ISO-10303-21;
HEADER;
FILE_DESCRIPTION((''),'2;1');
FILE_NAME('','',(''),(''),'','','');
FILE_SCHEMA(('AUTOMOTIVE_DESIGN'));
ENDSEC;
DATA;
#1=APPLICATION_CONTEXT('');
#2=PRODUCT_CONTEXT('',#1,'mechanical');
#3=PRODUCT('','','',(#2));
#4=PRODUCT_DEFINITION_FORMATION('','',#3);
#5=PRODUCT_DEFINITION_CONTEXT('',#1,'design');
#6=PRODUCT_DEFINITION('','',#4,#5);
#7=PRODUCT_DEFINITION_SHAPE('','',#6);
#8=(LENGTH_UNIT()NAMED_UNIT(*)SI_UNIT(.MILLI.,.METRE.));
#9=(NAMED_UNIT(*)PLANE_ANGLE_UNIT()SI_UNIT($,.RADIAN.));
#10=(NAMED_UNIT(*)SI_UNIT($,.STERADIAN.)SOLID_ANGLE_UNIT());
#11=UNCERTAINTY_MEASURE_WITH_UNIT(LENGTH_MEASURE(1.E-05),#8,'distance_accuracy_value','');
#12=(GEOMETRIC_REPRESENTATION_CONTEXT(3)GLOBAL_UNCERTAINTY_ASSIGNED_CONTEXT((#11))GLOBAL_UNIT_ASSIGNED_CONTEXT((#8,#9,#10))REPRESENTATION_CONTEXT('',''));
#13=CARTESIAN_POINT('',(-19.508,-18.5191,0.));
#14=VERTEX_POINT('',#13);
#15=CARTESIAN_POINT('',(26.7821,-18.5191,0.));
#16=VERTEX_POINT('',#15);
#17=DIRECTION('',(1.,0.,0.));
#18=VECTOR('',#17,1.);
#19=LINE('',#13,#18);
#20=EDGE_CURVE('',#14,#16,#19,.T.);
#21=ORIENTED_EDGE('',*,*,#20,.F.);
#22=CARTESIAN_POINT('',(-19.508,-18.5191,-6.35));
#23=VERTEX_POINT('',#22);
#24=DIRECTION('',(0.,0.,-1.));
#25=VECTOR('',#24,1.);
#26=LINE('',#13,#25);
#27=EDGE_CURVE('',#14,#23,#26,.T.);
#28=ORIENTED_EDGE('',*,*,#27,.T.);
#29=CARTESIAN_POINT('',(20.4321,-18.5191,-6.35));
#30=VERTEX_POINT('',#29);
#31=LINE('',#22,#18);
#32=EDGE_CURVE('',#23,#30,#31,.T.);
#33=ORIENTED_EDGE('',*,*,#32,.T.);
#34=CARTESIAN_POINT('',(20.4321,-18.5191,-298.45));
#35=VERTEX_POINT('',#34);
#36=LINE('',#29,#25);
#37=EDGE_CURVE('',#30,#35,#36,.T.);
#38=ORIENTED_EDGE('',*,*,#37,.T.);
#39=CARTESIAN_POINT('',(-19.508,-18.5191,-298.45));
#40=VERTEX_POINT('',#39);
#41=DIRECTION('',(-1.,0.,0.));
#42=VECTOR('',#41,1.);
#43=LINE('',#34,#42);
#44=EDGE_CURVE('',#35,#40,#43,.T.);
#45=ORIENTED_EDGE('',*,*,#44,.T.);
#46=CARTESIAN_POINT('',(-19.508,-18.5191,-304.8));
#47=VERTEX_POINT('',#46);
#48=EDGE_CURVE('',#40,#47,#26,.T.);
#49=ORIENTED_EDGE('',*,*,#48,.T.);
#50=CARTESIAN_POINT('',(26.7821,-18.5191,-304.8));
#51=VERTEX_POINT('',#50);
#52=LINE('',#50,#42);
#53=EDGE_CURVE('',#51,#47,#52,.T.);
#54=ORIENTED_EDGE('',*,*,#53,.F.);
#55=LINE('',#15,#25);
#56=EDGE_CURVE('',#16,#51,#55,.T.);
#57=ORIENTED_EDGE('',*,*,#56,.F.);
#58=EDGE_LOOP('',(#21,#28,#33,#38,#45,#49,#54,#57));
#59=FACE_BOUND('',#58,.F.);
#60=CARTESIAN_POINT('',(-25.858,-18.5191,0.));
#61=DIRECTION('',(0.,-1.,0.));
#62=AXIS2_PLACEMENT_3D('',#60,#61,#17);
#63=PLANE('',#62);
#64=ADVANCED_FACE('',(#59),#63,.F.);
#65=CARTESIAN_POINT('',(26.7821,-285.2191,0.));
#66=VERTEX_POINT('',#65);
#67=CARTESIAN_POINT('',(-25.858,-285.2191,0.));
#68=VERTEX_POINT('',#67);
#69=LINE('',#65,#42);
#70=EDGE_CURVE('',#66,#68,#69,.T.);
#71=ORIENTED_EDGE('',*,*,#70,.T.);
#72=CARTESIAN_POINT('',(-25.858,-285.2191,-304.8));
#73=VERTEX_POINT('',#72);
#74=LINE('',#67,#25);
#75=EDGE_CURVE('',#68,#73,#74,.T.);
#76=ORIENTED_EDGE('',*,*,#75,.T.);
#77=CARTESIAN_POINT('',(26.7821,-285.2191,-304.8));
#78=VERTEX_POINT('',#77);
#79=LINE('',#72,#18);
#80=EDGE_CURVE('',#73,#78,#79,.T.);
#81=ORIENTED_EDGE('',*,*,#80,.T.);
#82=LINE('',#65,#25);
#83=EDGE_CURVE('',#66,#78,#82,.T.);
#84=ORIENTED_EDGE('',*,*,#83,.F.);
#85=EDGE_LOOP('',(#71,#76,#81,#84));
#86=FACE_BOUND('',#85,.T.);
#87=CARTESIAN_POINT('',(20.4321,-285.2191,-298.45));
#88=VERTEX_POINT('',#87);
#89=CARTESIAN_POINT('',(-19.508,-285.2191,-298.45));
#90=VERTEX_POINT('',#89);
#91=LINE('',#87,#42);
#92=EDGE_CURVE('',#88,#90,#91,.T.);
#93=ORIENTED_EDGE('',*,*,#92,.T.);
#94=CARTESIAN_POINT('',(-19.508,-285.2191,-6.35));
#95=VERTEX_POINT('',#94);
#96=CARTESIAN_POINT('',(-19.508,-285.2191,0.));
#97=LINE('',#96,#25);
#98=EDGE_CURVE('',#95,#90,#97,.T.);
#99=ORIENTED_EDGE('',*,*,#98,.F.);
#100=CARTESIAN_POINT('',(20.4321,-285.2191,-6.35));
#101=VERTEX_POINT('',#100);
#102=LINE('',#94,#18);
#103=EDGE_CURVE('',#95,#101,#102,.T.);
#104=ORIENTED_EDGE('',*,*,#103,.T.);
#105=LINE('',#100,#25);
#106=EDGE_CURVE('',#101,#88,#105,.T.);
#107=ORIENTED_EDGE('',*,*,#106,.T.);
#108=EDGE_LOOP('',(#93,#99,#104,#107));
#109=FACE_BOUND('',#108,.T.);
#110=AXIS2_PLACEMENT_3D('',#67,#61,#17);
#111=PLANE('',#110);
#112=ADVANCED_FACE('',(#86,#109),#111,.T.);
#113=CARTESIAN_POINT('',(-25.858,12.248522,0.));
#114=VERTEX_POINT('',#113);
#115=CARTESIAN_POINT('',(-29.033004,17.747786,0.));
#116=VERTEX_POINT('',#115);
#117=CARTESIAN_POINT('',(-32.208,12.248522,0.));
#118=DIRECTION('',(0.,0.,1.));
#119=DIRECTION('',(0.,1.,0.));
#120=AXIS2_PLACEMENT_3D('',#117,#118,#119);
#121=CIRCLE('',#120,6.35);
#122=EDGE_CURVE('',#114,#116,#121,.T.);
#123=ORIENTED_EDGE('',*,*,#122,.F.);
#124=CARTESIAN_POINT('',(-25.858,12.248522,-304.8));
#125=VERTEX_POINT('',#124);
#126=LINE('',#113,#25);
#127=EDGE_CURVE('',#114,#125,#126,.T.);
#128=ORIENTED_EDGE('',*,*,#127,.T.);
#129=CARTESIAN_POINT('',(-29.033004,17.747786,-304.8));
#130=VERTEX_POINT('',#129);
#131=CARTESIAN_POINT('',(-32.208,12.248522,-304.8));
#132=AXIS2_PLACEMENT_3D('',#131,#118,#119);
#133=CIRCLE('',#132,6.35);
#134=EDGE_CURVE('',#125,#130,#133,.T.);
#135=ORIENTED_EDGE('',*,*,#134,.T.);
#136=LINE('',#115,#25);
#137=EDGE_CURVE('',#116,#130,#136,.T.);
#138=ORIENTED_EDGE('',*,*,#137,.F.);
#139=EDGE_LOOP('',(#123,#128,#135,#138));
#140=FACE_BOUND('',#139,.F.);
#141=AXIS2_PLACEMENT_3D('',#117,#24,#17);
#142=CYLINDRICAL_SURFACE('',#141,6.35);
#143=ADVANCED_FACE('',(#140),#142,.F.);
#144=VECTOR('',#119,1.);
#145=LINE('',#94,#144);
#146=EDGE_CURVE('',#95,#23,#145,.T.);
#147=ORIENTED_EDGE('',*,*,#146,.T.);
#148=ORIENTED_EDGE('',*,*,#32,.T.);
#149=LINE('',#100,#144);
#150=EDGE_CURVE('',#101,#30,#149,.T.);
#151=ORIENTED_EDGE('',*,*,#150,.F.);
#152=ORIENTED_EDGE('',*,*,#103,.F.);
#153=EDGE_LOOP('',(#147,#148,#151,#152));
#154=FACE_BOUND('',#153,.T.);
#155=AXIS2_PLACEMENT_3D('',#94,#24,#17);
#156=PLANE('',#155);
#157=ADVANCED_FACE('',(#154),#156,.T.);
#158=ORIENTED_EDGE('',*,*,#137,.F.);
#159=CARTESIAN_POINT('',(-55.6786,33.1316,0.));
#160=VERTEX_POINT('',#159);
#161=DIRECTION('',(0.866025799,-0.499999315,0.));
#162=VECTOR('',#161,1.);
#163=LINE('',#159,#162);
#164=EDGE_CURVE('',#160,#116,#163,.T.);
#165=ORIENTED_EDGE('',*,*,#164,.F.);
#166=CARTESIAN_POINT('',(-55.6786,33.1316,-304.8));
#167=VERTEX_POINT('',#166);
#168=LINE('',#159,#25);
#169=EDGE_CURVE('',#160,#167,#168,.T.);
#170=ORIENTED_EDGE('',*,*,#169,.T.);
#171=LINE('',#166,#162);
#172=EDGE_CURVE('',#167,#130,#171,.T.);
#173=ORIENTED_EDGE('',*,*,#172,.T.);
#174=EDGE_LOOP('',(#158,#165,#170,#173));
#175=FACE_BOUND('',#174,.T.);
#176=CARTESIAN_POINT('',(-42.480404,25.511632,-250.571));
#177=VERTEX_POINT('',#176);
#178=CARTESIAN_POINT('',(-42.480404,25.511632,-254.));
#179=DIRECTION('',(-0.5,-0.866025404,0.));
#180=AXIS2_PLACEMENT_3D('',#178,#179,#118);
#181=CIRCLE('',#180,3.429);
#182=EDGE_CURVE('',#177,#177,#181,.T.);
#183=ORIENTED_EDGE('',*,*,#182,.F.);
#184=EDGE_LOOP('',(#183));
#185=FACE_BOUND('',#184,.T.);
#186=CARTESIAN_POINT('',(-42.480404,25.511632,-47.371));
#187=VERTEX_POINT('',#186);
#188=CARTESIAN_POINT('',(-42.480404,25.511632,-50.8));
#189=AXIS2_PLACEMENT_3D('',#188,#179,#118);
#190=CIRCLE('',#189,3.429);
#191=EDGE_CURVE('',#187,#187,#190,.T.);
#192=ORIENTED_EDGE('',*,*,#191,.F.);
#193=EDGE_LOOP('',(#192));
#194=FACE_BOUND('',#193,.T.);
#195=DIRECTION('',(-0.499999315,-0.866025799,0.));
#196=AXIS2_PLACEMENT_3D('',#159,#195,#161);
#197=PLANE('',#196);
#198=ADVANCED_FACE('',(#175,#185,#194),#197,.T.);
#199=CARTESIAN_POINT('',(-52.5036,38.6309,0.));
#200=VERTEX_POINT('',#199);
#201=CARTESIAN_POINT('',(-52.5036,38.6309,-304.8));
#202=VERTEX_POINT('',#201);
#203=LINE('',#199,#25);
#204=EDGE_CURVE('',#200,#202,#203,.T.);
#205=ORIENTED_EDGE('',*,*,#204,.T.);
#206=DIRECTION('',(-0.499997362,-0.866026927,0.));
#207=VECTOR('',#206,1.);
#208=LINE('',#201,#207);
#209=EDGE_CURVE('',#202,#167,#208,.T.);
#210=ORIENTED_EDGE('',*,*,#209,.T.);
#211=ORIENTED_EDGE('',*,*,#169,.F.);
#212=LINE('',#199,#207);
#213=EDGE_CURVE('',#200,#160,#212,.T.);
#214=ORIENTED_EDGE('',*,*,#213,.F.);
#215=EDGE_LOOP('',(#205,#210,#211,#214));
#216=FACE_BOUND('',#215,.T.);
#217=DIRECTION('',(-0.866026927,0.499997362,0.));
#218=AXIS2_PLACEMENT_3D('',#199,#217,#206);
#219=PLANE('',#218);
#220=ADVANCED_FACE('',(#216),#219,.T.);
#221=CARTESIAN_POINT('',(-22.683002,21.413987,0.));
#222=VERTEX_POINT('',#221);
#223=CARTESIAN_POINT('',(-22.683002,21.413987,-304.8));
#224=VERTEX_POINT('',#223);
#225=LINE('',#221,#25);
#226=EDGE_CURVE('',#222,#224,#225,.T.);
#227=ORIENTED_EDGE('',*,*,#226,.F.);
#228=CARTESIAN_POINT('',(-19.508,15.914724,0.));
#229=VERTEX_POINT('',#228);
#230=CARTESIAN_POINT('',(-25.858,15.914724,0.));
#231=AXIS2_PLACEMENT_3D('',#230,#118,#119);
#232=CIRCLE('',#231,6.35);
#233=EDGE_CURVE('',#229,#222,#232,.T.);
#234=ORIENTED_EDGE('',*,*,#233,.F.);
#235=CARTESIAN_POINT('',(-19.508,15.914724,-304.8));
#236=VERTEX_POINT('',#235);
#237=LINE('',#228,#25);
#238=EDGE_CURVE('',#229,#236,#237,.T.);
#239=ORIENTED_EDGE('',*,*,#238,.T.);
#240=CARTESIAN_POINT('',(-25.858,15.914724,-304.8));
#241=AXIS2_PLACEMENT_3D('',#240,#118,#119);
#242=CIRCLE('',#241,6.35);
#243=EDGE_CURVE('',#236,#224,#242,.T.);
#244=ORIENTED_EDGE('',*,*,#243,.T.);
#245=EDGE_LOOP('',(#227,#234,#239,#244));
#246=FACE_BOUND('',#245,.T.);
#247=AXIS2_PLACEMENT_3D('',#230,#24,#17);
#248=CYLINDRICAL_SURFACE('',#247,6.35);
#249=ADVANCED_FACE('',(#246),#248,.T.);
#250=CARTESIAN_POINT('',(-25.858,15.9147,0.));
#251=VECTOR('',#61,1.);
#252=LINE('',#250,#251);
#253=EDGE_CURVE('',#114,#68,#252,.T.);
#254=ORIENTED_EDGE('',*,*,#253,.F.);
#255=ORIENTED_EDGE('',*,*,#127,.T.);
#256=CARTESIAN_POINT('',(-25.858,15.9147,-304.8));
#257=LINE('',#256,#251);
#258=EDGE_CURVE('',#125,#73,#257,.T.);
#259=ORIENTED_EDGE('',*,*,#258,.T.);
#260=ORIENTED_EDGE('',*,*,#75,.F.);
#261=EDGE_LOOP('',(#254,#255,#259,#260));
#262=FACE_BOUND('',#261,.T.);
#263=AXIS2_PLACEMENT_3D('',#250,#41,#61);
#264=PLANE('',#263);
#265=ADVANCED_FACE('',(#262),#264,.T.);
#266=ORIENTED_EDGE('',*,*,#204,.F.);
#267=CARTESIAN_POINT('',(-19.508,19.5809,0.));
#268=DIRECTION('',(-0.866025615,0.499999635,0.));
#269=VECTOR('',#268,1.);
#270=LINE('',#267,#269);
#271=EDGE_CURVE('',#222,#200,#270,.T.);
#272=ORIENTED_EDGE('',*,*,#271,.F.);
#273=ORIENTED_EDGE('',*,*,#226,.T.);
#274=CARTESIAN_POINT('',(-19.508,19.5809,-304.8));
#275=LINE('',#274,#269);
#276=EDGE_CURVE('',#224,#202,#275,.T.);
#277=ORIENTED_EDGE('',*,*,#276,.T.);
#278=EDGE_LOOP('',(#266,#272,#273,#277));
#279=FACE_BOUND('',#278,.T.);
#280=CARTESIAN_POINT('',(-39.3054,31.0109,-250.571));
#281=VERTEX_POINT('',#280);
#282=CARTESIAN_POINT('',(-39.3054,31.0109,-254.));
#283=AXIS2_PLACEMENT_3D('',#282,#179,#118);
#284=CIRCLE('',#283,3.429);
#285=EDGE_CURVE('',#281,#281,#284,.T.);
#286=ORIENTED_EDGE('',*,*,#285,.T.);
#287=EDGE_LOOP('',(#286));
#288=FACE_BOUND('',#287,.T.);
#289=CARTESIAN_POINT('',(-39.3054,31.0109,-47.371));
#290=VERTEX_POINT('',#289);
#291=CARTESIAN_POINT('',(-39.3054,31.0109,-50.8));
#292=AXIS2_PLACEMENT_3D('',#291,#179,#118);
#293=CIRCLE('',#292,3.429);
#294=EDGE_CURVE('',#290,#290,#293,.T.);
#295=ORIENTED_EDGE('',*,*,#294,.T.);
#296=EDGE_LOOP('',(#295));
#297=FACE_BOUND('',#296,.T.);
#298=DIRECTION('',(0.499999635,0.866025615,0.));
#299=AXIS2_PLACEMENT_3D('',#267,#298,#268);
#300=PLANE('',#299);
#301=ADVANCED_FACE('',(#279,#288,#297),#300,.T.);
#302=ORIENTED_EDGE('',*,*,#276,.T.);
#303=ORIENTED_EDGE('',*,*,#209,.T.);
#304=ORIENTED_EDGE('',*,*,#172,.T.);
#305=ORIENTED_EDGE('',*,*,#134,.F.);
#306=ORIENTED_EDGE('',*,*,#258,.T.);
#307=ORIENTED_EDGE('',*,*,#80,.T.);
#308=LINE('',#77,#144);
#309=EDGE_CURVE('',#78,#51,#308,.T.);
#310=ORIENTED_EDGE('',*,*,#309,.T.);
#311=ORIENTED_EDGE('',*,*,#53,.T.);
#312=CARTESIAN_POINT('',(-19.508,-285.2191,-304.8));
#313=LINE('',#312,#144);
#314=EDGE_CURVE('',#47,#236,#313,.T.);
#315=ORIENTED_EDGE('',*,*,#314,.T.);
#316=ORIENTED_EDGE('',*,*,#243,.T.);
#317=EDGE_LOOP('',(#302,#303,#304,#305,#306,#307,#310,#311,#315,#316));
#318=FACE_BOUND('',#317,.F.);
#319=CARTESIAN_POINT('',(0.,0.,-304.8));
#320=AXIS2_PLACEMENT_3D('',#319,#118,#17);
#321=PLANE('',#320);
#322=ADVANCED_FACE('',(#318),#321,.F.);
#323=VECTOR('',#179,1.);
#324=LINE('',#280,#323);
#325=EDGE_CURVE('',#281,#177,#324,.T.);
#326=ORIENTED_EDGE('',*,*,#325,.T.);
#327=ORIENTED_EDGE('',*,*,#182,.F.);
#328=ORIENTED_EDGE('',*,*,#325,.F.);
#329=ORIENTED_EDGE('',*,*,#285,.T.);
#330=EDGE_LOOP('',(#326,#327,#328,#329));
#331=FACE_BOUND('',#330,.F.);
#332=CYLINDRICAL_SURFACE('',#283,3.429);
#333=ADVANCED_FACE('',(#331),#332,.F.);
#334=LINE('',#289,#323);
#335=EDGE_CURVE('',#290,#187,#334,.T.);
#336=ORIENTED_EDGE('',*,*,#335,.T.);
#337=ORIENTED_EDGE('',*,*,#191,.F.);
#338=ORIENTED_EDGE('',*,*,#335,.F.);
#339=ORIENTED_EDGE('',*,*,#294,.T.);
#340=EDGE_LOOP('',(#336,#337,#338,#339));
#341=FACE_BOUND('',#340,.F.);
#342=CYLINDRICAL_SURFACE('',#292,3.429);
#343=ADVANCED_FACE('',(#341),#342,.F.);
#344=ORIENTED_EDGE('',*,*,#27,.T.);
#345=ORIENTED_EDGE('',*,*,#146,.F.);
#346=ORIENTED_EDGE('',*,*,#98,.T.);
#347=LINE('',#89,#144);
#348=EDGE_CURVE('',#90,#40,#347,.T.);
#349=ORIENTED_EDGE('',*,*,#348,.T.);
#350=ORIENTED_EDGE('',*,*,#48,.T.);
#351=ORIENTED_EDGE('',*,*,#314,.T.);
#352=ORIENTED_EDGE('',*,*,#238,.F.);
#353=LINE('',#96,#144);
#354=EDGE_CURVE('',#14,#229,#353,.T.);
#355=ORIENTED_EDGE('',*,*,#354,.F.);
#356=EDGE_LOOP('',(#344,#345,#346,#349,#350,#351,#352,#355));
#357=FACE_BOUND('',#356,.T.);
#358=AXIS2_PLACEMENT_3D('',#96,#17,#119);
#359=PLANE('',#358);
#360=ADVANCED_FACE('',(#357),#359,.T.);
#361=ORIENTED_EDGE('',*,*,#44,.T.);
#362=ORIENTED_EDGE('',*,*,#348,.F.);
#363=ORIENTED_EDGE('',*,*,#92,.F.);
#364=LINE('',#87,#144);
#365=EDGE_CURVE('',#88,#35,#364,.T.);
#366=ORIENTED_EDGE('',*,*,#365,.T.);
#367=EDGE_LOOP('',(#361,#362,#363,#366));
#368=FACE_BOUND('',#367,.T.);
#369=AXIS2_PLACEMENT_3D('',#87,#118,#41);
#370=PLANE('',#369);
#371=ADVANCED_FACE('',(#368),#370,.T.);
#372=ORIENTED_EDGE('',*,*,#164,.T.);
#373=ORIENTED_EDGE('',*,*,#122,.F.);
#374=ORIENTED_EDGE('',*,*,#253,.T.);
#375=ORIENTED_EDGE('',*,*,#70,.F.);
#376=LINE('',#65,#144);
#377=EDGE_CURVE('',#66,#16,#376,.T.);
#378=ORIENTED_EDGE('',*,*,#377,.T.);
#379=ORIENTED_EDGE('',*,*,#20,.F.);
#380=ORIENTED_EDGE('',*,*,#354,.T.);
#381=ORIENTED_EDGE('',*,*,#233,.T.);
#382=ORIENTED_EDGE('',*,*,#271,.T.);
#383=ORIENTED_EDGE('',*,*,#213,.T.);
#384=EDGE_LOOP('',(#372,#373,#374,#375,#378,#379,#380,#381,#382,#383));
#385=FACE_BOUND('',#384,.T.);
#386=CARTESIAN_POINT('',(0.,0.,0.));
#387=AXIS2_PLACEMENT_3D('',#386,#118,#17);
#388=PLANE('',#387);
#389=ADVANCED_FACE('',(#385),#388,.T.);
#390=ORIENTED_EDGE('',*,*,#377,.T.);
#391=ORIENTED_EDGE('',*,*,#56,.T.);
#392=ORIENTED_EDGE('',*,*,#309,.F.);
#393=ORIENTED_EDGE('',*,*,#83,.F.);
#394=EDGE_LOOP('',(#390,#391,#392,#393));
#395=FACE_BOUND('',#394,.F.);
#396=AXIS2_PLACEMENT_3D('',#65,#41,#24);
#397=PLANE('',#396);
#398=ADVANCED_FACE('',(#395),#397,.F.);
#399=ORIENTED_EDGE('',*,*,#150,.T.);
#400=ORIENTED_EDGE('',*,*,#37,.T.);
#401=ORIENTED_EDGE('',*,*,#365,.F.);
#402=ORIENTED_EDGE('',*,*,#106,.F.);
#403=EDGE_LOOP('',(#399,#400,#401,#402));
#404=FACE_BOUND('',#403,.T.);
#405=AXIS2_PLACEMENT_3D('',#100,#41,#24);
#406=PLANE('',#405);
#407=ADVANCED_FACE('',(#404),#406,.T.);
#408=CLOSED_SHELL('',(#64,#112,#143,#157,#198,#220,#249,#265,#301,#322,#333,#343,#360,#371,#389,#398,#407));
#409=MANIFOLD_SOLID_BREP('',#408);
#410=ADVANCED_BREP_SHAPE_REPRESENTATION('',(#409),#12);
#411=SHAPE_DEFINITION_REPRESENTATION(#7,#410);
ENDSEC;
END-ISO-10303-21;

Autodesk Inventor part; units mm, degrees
ref_plane "YZ Plane" through (0, 0, 0) normal (1, 0, 0) x (0, 1, 0)
ref_plane "XZ Plane" through (0, 0, 0) normal (0, 1, 0) x (-1, 0, 0)
sketch "Sketch1" plane through (0, 0, 0) normal (0, 0, 1) x (1, 0, 0)
  line L0 (-19.508, -285.2191) -> (-19.508, 19.5809)
  line L1 (-19.508, 19.5809) -> (-52.5036, 38.6309)
  line L2 (-52.5036, 38.6309) -> (-55.6786, 33.1316)
  line L3 (-19.508, 19.5809) -> (-25.858, 15.9147)
  line L4 (-55.6786, 33.1316) -> (-25.858, 15.9147)
  line L5 (-25.858, 15.9147) -> (-25.858, -285.2191)
  line L6 (-25.858, -285.2191) -> (-19.508, -285.2191)
  point P0 (0, 0)
  dimension "d0" = 120
  dimension "d1" = 304.8
  dimension "d2" = 38.1
  dimension "d4" = 6.35
extrude "Extrusion1" add sketch "Sketch1" against normal blind 304.8
fillet "Fillet1" radius 6.35 2 edges at (-19.508, 19.5809, -152.4) (-25.858, 15.9147, -152.4)
sketch "Sketch2" plane through (-52.5036, 38.6309, 0) normal (0.5, 0.8660254, 0) x (0.8660254, -0.5, 0)
  line L0 (0, 0) -> (0, 304.8) projected
  line L1 (34.4338, 0) -> (0, 0) projected
  point P0 (64.7849, 0)
  point P1 (15.24, 50.8)
  point P2 (15.24, 254)
  dimension "d8" = 50.8
  dimension "d10" = 254
  dimension "d11" = 15.24
  dimension "d12" = 15.24
hole "Hole1" at (-39.3054, 31.0109, -50.8) at (-39.3054, 31.0109, -254) direction (-0.5, -0.8660254, 0) diameter 6.858 depth 25.4 tip angle 118
sketch "Sketch3" plane through (-25.858, -285.2191, 0) normal (0, -1, 0) x (1, 0, 0)
  line L0 (0, -304.8) -> (6.35, -304.8) projected
  line L1 (6.35, 0) -> (6.35, -304.8) projected
  line L2 (0, 0) -> (6.35, 0) projected
  line L3 (0, 0) -> (0, -304.8) projected
  line L4 (6.35, 0) -> (52.6401, 0)
  line L5 (52.6401, 0) -> (52.6401, -304.8)
  line L6 (52.6401, -304.8) -> (6.35, -304.8)
  line L7 (6.35, -304.8) -> (6.35, 0)
  line L8 (6.35, -6.35) -> (46.2901, -6.35)
  line L9 (46.2901, -6.35) -> (46.2901, -298.45)
  line L10 (46.2901, -298.45) -> (6.35, -298.45)
  line L11 (6.35, -298.45) -> (6.35, -6.35)
  point P0 (25.858, 0)
  dimension "d20" = 6.35
  dimension "d21" = 6.35
  dimension "d22" = 6.35
ref_plane "Work Plane1" through (-22.683, 21.414, 0) normal (0.5, 0.8660254, 0) x (-0.8660254, 0.5, 0)
extrude "Extrusion2" add sketch "Sketch3" against normal blind 266.7 contours L1 L10 L9 L8 L4 L5 L6
thread "Thread1" size "5/16-18 UNC" class "2B" standard "ANSI Unified Screw Threads" full length
thread "Thread2" size "5/16-18 UNC" class "2B" standard "ANSI Unified Screw Threads" full length
properties part number "slideFeeder"
